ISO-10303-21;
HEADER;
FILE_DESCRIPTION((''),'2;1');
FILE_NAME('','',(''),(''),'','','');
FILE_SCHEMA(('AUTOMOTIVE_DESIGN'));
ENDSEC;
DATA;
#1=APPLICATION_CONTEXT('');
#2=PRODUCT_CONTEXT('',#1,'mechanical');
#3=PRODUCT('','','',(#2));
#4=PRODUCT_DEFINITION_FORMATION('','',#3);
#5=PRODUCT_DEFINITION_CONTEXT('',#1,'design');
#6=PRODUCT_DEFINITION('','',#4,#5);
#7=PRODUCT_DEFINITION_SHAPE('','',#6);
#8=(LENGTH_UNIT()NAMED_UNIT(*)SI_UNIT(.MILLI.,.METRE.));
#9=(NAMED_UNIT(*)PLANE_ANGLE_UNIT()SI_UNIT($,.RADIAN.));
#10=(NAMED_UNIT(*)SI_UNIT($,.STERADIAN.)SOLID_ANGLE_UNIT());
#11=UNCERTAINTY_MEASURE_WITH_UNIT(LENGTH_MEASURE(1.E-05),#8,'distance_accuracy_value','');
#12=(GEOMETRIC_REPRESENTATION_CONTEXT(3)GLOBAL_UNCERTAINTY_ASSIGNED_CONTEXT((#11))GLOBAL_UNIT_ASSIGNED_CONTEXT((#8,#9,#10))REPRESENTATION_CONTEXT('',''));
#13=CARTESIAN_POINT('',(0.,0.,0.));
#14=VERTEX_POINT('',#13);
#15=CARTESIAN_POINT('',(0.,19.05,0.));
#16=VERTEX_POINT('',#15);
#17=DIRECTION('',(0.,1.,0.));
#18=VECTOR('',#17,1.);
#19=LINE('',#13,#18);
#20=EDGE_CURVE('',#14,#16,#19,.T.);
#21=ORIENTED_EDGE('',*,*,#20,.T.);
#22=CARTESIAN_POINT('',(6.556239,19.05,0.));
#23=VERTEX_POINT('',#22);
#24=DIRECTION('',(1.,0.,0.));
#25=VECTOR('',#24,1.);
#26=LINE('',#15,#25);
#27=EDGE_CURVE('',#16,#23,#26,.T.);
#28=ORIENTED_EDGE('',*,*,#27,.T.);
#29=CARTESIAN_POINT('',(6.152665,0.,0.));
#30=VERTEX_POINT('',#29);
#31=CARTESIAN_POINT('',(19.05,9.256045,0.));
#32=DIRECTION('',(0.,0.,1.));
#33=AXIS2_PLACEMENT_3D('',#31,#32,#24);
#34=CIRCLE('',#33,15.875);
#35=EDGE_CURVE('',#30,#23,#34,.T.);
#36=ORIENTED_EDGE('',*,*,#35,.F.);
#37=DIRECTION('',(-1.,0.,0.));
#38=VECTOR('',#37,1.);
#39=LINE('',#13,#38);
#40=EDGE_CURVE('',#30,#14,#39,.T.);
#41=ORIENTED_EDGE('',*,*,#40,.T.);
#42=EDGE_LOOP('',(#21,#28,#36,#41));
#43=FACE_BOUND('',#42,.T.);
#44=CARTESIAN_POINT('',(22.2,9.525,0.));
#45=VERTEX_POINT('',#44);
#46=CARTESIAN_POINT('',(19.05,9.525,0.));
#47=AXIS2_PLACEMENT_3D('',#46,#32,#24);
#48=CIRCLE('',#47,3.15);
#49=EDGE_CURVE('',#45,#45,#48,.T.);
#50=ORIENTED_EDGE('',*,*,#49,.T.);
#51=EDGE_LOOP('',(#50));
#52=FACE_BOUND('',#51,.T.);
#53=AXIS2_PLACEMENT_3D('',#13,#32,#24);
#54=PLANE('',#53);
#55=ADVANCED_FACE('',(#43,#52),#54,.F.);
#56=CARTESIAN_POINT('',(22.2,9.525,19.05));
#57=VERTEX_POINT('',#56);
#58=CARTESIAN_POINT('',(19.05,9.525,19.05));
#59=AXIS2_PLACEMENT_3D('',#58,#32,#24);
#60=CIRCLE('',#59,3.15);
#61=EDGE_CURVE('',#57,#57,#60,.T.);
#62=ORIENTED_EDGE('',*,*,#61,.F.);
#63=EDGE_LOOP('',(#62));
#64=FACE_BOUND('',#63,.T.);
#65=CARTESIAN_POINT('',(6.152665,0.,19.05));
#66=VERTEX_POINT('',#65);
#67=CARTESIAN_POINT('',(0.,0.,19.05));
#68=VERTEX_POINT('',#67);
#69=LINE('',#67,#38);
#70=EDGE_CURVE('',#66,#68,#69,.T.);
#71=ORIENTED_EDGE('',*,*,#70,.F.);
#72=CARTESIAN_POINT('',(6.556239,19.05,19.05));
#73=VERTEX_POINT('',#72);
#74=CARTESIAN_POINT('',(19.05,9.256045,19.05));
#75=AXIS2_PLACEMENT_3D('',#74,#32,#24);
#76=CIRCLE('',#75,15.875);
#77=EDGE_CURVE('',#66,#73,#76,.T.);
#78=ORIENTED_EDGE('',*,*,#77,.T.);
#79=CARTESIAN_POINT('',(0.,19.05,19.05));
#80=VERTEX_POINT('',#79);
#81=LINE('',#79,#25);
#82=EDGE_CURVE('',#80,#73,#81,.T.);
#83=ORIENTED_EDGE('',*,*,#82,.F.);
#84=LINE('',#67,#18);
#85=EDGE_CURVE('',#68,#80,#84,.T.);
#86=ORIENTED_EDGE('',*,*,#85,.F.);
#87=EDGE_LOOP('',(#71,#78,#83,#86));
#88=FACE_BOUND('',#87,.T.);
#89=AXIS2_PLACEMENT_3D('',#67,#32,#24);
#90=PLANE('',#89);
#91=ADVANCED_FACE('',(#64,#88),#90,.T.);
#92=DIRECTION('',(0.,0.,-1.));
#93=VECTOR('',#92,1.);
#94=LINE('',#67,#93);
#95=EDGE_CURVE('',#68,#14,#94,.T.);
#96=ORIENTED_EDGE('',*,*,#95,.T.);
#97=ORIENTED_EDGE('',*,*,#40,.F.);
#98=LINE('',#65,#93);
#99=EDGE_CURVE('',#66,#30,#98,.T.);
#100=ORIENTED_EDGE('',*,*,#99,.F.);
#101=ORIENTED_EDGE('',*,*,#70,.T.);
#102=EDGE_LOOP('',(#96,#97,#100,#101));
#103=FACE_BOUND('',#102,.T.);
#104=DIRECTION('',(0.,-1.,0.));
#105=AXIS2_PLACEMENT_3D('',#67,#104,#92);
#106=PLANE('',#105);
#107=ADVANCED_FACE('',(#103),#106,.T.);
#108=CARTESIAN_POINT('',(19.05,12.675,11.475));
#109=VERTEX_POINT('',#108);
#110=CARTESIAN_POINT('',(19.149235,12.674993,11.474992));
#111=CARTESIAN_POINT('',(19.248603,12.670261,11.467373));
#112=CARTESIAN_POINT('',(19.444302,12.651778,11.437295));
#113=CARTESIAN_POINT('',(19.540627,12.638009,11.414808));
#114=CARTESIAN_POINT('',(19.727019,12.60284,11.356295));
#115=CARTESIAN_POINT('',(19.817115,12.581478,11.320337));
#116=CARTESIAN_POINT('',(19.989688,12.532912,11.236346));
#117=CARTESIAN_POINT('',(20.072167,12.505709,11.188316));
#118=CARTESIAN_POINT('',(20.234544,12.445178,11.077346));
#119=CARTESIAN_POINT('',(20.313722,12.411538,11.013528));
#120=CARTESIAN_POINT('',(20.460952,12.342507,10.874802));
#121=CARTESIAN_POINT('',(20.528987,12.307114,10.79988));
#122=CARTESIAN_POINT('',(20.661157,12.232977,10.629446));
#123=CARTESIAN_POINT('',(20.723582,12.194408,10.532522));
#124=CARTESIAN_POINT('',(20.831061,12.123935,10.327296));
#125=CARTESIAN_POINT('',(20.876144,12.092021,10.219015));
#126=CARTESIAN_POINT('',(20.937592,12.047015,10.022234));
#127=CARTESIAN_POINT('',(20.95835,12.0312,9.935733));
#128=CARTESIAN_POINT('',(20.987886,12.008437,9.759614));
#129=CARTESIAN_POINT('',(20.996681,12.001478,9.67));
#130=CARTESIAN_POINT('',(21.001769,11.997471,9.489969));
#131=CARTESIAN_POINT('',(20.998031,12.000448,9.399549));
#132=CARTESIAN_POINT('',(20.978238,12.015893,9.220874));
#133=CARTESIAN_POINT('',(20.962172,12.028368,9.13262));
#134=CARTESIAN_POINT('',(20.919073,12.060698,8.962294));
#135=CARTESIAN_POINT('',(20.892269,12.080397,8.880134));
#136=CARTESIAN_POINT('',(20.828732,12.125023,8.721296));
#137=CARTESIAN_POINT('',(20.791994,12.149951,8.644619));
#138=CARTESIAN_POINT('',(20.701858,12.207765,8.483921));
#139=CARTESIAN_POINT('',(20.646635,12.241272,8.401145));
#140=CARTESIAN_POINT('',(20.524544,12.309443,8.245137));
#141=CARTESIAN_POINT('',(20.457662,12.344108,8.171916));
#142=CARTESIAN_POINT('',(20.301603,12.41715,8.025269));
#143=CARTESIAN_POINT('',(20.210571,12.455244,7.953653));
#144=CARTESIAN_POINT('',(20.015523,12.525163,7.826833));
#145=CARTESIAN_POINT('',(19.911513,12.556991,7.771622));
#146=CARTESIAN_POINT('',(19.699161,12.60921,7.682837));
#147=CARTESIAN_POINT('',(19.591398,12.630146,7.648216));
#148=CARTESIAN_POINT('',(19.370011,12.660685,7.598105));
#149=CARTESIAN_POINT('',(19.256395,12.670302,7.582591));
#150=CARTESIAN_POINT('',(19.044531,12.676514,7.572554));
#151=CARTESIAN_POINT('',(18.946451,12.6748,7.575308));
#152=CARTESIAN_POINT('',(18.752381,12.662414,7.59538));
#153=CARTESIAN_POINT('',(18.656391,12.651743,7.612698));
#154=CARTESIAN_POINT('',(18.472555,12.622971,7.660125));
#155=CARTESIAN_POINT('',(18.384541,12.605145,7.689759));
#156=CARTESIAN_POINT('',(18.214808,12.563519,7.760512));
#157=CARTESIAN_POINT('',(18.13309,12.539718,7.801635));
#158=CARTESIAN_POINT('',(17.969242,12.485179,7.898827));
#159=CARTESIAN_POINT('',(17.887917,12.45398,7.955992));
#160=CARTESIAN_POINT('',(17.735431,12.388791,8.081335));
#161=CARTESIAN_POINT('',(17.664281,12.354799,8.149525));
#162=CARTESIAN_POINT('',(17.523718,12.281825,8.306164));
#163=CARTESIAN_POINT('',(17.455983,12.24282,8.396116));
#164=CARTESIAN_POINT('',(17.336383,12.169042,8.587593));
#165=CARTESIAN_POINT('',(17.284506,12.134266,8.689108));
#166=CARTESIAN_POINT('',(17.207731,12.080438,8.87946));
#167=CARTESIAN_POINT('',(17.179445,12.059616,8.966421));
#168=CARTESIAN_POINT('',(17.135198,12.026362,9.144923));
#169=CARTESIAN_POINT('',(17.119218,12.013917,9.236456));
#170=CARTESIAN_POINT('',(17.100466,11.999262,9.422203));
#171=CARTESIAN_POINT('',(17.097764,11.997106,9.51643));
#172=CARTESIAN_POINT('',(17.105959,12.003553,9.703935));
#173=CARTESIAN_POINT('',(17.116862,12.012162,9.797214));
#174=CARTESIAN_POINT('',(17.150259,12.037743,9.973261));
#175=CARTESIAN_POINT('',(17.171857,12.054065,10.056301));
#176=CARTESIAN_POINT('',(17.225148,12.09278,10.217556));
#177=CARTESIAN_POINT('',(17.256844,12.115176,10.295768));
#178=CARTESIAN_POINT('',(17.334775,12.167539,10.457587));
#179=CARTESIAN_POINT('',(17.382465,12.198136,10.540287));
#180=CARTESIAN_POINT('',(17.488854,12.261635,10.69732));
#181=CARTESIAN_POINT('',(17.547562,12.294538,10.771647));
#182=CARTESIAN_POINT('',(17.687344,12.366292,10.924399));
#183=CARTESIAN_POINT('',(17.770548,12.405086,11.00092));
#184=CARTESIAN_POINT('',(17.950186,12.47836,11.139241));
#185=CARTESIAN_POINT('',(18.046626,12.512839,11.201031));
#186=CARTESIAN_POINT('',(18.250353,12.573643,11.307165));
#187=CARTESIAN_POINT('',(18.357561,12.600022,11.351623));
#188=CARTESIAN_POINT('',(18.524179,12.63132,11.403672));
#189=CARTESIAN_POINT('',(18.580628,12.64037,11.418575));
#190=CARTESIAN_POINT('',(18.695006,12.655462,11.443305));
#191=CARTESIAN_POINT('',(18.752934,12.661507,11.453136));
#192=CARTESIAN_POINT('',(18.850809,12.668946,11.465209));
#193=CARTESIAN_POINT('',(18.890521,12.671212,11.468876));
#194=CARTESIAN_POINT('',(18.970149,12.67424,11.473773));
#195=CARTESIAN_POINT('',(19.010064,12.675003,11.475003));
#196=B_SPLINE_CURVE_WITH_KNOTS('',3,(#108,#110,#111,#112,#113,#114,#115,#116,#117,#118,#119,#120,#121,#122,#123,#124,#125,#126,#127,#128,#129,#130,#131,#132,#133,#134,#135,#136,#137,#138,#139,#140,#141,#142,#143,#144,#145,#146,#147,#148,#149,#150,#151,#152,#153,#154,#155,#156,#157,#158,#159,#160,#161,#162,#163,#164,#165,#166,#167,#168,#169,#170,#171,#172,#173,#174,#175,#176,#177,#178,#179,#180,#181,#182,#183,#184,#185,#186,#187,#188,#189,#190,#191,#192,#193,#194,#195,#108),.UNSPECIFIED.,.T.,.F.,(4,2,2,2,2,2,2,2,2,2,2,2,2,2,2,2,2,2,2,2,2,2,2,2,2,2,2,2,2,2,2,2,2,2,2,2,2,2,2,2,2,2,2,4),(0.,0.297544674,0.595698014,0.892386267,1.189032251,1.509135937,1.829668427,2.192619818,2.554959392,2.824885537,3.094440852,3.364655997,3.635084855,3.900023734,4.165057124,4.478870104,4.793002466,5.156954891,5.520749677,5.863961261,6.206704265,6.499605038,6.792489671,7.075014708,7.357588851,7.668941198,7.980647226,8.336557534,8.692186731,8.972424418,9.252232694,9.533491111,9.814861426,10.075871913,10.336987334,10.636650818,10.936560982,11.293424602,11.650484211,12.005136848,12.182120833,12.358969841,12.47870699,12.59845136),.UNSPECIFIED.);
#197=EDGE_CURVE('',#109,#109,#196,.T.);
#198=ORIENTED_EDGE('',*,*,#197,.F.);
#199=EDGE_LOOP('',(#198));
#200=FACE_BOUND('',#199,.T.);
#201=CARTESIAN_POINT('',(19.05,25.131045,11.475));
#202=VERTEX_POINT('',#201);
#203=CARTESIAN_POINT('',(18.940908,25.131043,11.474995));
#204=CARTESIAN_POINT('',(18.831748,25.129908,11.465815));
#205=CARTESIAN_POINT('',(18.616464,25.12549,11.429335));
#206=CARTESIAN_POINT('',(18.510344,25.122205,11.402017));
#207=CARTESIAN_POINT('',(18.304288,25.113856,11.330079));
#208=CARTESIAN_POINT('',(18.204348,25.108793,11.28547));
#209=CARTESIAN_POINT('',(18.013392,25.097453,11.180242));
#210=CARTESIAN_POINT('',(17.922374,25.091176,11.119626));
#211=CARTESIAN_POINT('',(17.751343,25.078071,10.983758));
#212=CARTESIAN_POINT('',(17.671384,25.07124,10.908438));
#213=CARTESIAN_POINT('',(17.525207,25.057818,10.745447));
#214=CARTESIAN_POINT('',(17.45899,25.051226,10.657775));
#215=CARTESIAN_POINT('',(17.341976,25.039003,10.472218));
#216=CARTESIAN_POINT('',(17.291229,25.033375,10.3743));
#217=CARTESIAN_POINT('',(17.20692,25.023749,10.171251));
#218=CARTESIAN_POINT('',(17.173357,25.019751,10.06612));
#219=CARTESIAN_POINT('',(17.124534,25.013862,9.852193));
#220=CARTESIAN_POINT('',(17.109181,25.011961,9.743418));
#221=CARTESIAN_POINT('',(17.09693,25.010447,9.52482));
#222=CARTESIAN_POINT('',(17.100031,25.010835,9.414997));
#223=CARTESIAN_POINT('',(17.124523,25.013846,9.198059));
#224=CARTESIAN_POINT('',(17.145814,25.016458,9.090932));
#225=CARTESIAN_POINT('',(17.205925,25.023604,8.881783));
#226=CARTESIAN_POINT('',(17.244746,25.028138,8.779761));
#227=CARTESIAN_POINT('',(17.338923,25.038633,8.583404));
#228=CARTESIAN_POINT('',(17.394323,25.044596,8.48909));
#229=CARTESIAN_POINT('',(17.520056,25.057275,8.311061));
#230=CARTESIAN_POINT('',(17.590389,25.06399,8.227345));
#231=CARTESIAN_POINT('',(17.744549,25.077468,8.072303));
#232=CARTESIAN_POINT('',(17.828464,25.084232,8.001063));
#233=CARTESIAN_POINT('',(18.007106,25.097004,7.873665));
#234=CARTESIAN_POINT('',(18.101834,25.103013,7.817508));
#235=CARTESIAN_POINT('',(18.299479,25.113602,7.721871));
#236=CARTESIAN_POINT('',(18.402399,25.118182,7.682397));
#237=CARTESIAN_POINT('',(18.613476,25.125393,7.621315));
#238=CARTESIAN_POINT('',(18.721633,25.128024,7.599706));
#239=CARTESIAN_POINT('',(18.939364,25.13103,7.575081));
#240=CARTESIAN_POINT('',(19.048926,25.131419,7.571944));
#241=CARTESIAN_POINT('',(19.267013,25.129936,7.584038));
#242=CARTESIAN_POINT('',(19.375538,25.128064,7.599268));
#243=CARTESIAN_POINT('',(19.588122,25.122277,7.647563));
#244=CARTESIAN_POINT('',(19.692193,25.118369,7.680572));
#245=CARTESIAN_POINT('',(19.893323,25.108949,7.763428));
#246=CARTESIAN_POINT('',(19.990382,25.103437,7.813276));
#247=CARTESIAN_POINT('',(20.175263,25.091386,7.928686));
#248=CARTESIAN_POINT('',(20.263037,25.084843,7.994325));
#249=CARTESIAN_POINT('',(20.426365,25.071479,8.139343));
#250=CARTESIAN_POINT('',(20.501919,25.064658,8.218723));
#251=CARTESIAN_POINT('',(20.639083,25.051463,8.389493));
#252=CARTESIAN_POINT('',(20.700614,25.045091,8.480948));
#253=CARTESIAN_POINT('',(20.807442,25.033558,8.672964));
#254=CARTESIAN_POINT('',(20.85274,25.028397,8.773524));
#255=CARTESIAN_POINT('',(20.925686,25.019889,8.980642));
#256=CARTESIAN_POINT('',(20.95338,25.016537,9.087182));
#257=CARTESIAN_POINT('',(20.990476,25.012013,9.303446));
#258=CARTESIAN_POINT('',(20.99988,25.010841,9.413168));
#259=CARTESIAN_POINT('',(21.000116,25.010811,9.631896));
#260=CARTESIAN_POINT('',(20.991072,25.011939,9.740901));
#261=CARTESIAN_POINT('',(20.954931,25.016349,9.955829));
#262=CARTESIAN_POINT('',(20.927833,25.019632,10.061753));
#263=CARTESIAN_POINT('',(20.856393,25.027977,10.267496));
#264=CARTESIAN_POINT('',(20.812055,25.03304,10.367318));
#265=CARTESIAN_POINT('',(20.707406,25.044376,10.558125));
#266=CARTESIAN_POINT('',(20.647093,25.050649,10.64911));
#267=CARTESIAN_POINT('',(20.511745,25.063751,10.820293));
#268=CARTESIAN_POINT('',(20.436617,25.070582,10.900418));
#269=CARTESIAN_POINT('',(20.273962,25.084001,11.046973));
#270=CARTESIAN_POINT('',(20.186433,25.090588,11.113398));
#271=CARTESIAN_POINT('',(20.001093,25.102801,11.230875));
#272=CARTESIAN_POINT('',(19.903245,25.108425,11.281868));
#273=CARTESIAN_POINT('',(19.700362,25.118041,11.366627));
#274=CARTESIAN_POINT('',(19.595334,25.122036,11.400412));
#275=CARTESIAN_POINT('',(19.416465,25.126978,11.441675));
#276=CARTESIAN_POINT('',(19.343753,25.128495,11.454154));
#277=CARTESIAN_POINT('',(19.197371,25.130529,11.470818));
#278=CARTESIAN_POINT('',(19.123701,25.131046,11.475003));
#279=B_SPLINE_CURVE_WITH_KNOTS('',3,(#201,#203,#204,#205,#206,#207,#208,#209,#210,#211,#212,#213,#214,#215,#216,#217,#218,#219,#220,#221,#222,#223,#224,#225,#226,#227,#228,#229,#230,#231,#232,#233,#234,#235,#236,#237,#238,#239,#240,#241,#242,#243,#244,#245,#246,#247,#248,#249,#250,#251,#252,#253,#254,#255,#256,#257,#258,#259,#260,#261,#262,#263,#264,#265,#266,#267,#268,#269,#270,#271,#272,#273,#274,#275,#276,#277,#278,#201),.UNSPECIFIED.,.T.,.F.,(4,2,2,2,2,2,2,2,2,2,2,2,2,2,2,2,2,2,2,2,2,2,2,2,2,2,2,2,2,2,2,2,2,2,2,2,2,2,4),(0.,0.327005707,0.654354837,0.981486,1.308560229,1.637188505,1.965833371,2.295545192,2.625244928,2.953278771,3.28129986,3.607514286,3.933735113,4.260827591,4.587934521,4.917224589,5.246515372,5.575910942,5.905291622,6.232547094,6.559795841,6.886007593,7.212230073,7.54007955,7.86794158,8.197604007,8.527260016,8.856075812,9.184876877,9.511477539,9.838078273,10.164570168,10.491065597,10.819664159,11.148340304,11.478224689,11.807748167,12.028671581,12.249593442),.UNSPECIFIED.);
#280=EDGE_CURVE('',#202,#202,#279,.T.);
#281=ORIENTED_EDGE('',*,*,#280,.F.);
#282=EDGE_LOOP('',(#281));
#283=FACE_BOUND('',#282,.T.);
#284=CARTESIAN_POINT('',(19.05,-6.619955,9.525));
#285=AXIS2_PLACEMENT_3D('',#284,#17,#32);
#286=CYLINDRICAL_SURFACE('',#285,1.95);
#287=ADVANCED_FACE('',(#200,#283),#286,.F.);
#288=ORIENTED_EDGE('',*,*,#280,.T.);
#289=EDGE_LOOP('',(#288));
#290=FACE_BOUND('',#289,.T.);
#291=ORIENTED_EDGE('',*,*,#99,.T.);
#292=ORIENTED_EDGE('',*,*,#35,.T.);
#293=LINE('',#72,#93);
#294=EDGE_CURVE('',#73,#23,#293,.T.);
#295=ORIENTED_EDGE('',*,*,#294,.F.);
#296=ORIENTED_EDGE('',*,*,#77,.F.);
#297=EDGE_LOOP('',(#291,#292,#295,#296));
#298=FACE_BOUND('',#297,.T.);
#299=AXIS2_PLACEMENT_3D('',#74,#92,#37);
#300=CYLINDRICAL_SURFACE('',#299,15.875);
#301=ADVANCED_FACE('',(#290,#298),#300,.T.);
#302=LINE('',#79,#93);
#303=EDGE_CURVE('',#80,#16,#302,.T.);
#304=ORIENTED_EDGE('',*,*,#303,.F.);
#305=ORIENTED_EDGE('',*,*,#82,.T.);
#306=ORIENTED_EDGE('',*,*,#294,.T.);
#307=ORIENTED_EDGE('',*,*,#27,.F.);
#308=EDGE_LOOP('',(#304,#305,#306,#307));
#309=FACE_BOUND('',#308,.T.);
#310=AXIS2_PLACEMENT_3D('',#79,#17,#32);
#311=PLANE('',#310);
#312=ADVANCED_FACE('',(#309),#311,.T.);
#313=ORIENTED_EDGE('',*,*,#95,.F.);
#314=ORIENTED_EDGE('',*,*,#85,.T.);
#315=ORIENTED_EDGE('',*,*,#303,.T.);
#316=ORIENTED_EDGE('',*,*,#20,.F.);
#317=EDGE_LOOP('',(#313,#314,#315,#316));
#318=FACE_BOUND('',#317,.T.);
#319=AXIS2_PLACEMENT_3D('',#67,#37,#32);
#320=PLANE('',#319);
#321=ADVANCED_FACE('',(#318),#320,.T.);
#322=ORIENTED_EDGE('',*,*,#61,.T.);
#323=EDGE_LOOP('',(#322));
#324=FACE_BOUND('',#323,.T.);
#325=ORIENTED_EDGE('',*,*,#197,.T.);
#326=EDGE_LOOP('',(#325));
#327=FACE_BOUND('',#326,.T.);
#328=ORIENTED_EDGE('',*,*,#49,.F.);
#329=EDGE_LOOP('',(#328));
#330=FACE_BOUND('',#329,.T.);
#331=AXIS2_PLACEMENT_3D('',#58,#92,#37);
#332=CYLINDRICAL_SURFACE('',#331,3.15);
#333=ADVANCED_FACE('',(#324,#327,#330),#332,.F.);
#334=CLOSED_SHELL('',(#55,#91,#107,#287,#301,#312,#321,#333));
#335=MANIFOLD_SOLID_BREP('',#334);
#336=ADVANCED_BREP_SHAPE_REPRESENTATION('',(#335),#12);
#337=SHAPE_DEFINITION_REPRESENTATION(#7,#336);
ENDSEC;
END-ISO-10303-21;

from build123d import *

# Parameters (mm, degrees)
SKETCH1_R               = 3.15
BOSS_EXTRUDE1_DEPTH     = 19.05
CUT_EXTRUDE2_REACH      = 55.695
CUT_EXTRUDE2_END_RADIUS = 3.15
CUT_EXTRUDE2_START      = 6.35
SKETCH3_R               = 1.95


with BuildPart() as part:
    # Sketch1 → Boss-Extrude1 (new body)
    with BuildSketch(Plane.XY):
        with BuildLine():
            Line((0, 19.05), (0, 0))
            Line((0, 0), (6.152664584, 0))
            ThreePointArc((6.152664584, 0), (34.921438813, 8.919808212), (6.556238945, 19.05))
            Line((6.556238945, 19.05), (0, 19.05))
        make_face()
        with Locations((19.05, 9.525)):
            Circle(SKETCH1_R, mode=Mode.SUBTRACT)
    extrude(amount=BOSS_EXTRUDE1_DEPTH)

    # Cut-Extrude2: up to this cylinder (the profile starts outside it)
    cut_extrude2_end = Plane(origin=(19.05, 9.525, 9.525), z_dir=(0, 0, -1)) * Cylinder(CUT_EXTRUDE2_END_RADIUS, 118.69, mode=Mode.PRIVATE)
    # Sketch3 → Cut-Extrude2 (cut, up to the surface)
    with BuildSketch(Plane(origin=(0, 19.05, 0), x_dir=(1, 0, 0), z_dir=(0, 1, 0)).offset(CUT_EXTRUDE2_START), mode=Mode.PRIVATE) as cut_extrude2_sk1:
        with Locations((19.05, -9.525)):
            Circle(SKETCH3_R)
    cut_extrude2_tool1 = extrude(cut_extrude2_sk1.sketch, amount=-CUT_EXTRUDE2_REACH, mode=Mode.PRIVATE) - cut_extrude2_end
    add(cut_extrude2_tool1.solids().sort_by_distance((19.05, 25.4, 9.525))[0], mode=Mode.SUBTRACT)


solid = part.part
